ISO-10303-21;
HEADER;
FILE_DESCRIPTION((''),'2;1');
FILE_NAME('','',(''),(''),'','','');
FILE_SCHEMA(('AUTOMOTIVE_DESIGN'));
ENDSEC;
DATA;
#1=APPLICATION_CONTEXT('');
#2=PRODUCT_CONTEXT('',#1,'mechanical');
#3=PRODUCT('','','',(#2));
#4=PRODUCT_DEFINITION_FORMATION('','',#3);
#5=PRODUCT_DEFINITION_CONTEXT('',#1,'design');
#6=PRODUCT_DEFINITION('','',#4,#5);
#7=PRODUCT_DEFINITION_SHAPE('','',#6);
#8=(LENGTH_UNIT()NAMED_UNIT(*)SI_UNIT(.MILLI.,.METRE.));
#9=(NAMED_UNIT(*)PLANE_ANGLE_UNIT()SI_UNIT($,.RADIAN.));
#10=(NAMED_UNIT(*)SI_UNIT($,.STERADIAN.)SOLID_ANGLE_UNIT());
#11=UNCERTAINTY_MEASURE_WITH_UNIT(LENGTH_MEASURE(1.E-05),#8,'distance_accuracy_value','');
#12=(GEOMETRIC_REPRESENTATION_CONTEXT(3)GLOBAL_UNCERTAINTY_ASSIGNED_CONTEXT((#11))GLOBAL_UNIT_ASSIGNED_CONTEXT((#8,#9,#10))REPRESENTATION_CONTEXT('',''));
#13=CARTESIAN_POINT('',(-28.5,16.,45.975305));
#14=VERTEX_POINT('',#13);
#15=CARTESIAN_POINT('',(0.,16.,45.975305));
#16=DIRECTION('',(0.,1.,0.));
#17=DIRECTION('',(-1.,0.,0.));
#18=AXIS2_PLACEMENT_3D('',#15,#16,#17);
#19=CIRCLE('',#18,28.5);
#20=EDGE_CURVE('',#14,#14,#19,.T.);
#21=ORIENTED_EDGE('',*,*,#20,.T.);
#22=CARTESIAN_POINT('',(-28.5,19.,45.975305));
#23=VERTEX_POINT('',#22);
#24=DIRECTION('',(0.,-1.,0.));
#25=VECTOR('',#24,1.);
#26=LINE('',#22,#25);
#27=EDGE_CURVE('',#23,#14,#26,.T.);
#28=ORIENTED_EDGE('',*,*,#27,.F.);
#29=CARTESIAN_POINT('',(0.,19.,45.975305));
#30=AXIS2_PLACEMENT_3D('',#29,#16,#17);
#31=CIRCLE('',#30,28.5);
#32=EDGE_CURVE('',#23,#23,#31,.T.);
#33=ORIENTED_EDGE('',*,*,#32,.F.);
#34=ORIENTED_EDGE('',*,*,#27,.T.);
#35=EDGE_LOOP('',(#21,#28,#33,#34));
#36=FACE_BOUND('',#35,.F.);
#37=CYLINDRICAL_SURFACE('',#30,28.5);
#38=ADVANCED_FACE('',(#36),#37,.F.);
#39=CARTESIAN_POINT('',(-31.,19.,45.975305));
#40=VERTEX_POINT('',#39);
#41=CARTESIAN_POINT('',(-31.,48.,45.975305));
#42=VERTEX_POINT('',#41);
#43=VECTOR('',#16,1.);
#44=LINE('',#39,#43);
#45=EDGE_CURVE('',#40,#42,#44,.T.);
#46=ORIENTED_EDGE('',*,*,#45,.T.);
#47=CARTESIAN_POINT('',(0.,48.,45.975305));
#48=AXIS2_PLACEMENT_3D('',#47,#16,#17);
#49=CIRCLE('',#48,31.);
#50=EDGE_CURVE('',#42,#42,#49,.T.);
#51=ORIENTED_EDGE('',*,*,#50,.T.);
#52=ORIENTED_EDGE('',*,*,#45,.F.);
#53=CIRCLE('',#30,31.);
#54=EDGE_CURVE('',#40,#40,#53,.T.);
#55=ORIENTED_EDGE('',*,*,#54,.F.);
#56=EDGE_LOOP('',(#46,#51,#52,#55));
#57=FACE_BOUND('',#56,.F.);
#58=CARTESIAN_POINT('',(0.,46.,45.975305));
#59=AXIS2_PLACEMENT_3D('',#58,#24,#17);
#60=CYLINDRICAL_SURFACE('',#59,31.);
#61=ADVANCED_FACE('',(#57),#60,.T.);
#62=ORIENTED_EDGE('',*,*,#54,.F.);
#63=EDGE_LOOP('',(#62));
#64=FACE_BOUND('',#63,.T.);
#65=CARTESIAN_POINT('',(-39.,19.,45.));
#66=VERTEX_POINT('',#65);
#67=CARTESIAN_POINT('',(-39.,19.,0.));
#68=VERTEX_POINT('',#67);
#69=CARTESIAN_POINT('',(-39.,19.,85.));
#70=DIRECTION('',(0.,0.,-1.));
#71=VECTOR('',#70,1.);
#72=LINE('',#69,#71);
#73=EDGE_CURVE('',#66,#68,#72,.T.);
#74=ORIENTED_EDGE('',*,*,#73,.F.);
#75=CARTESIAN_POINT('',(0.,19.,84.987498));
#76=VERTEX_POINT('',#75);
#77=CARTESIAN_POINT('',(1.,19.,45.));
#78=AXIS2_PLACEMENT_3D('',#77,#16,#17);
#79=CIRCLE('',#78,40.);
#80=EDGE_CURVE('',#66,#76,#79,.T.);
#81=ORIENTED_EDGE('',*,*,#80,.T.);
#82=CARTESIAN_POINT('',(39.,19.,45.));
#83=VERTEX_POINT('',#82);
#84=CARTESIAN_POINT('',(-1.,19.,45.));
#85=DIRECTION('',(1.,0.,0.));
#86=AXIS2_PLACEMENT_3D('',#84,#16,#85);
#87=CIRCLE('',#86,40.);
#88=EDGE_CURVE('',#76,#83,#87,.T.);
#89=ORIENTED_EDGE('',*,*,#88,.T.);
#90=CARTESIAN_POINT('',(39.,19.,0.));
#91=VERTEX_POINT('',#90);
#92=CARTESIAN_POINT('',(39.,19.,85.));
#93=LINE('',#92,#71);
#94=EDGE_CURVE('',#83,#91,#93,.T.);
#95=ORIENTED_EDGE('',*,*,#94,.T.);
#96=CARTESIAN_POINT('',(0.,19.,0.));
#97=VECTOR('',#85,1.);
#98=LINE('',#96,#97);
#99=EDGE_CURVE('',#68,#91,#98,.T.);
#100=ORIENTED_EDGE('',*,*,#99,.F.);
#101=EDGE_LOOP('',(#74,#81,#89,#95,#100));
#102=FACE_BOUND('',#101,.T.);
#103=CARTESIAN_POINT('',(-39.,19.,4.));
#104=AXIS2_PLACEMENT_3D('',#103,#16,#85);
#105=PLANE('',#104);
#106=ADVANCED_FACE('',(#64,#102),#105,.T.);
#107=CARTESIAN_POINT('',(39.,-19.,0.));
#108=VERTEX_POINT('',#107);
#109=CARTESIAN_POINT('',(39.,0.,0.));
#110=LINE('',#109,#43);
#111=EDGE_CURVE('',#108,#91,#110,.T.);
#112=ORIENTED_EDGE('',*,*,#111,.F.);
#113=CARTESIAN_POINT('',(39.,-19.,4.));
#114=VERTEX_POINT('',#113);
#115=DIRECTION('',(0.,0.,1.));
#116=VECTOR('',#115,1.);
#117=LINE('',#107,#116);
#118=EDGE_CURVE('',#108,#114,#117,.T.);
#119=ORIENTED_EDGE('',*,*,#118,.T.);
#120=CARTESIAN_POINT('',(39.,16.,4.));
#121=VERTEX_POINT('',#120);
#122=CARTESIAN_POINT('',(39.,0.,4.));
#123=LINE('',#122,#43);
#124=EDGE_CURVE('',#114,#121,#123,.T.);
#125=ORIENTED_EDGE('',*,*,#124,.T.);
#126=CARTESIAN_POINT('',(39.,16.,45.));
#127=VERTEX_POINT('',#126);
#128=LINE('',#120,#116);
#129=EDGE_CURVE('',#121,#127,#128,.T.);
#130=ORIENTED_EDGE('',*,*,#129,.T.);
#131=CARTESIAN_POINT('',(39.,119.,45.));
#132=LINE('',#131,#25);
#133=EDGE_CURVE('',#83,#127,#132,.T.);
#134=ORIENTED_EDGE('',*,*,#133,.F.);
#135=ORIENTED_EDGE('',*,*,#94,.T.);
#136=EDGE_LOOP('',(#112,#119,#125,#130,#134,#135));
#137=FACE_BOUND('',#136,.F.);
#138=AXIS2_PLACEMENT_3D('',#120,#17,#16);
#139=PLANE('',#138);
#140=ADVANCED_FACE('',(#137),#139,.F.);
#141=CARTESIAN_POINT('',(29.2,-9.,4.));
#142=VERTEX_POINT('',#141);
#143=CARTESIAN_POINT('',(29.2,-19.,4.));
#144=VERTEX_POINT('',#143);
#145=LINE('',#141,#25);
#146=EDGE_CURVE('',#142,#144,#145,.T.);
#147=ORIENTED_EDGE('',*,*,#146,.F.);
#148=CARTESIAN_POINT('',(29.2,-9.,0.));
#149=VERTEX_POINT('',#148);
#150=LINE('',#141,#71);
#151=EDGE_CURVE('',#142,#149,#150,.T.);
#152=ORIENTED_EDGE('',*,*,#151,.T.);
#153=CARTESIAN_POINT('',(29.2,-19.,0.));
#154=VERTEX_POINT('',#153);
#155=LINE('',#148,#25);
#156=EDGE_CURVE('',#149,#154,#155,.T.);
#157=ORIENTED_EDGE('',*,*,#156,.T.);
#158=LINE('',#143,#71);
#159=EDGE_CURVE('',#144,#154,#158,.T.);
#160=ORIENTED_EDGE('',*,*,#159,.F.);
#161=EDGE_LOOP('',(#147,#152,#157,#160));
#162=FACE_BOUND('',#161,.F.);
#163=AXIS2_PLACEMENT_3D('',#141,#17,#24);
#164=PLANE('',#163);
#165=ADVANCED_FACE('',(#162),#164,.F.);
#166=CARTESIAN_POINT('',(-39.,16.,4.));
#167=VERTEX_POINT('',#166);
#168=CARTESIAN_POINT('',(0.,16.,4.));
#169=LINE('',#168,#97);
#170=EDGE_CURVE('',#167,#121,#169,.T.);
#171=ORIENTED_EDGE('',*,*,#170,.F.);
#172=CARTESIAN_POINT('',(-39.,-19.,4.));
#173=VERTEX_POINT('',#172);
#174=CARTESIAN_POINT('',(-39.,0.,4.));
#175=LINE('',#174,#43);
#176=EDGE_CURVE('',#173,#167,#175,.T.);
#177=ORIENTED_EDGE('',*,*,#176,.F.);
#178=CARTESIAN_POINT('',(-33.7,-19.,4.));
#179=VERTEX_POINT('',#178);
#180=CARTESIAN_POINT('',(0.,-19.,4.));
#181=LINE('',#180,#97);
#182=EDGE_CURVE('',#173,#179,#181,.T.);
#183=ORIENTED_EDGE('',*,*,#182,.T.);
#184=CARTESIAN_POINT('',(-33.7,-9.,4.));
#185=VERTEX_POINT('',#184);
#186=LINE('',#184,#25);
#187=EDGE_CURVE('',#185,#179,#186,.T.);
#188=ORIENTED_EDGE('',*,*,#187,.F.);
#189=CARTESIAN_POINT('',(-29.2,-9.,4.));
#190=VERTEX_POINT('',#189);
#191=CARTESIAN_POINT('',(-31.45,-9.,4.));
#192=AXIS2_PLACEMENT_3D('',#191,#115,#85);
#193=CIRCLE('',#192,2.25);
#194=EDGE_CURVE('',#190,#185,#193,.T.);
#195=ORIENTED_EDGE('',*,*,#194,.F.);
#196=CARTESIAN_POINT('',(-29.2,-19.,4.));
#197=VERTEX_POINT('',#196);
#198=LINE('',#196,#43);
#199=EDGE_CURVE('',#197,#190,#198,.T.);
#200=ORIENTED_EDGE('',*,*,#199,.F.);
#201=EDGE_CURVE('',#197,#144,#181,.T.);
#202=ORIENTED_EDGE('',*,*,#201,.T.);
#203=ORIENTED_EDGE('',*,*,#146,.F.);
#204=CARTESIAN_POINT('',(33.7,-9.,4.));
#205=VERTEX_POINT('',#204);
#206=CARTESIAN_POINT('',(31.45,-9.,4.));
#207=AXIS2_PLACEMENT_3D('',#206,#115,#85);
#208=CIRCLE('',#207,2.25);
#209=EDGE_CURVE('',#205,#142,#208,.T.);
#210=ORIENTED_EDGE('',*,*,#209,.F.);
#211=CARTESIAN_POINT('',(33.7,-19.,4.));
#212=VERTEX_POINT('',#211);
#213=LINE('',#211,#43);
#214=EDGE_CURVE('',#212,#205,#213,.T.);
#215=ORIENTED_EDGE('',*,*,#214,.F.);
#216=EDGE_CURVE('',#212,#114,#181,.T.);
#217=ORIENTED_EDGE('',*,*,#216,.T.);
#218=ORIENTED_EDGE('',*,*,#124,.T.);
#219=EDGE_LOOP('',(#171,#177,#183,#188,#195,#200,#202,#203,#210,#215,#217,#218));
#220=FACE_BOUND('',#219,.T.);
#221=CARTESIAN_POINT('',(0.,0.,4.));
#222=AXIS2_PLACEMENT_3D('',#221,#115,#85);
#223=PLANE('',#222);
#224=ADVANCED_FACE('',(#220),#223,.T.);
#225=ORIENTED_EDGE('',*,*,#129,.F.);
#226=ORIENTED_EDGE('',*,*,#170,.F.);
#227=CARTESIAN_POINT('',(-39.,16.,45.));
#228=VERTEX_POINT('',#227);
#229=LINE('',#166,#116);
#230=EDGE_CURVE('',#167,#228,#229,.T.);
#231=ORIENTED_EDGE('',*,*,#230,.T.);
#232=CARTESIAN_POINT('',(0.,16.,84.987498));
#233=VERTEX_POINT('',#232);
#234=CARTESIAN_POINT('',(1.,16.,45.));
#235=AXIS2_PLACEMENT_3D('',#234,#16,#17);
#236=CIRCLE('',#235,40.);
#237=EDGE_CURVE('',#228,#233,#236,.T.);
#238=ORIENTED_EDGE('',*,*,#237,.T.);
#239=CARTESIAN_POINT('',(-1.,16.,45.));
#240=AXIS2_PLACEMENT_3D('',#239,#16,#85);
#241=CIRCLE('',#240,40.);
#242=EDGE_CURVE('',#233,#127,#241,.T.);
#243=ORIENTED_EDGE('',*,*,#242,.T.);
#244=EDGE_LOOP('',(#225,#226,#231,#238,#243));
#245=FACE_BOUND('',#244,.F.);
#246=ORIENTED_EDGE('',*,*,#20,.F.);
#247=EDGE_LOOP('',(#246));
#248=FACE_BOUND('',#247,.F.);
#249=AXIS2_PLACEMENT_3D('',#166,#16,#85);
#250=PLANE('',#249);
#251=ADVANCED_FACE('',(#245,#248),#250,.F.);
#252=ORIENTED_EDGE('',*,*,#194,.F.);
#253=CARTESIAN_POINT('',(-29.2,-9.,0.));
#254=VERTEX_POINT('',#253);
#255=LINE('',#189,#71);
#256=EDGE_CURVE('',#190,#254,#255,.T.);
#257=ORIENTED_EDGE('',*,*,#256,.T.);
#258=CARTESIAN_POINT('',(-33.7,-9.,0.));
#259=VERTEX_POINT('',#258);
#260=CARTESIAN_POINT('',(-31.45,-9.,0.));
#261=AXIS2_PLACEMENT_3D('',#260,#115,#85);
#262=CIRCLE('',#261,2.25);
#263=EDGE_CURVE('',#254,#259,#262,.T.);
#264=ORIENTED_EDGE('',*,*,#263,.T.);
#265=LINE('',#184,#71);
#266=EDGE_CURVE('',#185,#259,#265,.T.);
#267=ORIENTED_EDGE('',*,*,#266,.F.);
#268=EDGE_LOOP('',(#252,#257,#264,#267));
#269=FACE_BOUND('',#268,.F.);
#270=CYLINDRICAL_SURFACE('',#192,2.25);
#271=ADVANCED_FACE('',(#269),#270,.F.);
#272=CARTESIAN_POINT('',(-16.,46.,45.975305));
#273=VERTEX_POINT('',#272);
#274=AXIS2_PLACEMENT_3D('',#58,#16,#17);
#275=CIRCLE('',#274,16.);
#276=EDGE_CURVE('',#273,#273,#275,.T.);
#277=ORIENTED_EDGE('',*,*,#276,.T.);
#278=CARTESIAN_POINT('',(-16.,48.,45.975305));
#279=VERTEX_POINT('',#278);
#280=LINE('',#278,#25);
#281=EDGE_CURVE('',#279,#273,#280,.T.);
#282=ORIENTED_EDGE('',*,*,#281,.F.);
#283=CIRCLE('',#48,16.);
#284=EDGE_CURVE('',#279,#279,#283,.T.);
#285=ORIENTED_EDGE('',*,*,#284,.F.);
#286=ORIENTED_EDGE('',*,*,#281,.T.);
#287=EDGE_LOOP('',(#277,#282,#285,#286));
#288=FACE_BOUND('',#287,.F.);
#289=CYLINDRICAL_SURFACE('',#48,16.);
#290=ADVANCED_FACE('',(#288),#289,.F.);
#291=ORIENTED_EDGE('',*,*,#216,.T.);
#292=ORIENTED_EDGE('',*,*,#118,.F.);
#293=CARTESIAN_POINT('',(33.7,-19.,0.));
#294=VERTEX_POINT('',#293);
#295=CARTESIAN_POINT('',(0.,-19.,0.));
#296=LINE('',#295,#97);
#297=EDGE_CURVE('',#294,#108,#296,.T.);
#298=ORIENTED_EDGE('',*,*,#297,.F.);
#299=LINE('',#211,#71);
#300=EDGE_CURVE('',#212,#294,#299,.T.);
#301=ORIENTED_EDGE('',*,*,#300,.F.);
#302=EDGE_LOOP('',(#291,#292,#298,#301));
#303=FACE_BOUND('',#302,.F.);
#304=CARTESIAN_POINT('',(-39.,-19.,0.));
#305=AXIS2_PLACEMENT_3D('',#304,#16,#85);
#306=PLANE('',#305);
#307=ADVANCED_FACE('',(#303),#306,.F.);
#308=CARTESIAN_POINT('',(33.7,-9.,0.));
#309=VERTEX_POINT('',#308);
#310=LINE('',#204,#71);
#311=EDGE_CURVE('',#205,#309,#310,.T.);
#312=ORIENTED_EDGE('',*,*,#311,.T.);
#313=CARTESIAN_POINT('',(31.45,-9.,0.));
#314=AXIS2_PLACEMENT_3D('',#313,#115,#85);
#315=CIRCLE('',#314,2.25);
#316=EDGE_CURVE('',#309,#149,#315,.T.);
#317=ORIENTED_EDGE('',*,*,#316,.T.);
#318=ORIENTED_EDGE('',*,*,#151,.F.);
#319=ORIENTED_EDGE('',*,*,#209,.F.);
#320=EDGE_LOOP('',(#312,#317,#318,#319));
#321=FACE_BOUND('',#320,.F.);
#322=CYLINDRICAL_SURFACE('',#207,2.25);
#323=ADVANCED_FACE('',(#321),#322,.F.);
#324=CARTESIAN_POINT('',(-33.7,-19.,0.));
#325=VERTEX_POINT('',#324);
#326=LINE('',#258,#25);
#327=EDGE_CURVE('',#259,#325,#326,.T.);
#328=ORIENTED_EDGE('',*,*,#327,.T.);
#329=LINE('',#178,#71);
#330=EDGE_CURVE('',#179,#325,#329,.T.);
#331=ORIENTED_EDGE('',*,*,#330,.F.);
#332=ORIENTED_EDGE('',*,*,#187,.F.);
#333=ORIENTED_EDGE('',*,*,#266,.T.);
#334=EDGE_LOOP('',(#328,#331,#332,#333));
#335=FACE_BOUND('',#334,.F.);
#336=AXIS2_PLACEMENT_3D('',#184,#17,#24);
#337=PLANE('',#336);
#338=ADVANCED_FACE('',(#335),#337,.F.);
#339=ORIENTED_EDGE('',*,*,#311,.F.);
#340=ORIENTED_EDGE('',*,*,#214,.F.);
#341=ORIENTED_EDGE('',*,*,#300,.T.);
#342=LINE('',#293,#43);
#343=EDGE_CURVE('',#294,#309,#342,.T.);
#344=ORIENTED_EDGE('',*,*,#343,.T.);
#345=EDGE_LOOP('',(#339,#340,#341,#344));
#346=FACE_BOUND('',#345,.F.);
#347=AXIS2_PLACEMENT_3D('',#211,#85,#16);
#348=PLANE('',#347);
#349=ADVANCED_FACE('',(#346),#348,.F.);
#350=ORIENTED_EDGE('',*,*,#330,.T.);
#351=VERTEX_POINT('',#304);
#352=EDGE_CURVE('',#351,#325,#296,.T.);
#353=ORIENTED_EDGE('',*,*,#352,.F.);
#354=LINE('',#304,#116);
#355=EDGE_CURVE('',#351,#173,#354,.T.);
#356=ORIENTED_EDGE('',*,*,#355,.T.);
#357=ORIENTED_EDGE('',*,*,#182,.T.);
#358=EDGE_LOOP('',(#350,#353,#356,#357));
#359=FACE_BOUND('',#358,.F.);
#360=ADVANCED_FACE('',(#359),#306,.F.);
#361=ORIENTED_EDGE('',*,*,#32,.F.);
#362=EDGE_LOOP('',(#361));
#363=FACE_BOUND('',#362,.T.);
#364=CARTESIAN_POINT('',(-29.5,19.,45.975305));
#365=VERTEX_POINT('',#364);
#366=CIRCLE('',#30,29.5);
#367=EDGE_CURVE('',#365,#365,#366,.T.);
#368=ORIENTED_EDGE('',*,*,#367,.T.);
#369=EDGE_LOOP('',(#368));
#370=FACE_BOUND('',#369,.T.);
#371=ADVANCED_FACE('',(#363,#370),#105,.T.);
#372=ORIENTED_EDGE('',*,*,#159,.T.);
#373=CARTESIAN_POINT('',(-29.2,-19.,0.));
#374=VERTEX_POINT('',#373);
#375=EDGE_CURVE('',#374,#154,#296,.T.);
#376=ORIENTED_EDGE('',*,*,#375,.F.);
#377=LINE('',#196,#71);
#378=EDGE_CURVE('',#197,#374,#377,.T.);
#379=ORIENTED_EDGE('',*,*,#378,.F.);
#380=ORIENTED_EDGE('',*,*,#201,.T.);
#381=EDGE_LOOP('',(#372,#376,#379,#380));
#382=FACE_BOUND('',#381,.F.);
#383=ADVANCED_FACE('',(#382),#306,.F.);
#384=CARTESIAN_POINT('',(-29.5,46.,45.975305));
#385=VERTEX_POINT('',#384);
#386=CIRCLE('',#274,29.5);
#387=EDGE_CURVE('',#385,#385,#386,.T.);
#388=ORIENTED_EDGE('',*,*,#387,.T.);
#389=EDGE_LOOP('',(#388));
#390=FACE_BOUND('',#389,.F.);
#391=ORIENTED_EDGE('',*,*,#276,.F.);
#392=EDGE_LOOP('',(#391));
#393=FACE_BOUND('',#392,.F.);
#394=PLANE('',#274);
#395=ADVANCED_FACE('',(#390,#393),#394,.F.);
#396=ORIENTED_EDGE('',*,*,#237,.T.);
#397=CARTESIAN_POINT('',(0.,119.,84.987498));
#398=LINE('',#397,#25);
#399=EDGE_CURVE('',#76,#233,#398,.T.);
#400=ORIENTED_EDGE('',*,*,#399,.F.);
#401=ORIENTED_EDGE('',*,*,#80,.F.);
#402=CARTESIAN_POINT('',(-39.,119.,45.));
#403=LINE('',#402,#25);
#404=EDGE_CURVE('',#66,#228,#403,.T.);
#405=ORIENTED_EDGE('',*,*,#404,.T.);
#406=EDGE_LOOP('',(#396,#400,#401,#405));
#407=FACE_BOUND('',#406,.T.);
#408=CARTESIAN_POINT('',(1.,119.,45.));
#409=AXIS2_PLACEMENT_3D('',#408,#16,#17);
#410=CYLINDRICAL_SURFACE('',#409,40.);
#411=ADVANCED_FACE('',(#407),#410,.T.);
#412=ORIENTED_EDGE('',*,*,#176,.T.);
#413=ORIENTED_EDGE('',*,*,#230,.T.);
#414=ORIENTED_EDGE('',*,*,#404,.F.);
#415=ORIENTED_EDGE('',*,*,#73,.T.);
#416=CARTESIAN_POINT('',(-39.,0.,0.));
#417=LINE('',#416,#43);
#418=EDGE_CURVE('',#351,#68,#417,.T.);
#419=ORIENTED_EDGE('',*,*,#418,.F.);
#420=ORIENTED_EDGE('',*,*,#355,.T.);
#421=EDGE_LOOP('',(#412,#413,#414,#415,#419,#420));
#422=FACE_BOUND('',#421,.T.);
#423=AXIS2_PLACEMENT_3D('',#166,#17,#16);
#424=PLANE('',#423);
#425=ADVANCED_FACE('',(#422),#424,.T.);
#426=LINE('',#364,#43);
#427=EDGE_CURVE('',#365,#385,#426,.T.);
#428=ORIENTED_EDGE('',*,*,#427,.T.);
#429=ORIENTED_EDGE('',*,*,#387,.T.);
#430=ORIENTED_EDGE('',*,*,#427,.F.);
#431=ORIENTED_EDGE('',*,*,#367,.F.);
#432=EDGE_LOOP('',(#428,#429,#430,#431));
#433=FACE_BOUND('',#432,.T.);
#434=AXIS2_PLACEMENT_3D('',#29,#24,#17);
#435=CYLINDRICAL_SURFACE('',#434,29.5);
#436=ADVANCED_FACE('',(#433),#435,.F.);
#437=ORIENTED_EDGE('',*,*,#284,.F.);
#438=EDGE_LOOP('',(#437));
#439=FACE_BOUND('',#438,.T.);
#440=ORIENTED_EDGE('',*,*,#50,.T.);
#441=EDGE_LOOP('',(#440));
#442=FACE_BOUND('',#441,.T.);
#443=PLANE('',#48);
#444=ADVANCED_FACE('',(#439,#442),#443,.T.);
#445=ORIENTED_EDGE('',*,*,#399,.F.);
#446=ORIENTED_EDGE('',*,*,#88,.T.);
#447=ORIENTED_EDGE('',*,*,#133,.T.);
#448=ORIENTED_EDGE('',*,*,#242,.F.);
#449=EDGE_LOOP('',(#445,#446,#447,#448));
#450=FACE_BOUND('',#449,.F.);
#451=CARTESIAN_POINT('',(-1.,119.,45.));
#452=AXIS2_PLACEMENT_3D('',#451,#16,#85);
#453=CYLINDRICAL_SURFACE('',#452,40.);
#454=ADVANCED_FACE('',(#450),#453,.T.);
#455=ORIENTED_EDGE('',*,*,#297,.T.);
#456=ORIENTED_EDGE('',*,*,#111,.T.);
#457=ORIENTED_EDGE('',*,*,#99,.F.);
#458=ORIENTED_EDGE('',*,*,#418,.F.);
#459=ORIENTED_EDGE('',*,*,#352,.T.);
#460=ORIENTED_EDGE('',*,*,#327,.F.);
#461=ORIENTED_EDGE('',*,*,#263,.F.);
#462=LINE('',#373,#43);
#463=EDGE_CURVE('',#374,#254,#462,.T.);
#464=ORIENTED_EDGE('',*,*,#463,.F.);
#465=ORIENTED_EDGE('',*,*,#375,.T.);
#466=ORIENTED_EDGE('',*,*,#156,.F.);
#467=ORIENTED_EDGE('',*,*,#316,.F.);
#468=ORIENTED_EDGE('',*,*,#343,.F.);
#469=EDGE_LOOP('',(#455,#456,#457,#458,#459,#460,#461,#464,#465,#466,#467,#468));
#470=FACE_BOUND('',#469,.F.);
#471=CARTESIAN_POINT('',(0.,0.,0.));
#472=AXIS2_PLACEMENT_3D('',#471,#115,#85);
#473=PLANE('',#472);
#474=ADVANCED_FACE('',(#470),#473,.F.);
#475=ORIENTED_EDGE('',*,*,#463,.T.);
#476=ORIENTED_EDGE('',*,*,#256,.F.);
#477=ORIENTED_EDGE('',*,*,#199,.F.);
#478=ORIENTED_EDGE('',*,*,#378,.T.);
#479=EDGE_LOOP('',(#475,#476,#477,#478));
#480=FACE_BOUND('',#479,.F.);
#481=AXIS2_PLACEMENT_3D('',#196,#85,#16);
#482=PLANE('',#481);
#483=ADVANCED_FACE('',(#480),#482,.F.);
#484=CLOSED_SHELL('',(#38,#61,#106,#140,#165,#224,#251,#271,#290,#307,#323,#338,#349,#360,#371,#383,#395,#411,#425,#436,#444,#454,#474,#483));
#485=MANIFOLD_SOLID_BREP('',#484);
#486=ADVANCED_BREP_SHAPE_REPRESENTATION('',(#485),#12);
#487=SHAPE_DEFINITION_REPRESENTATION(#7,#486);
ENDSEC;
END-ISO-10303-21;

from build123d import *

# Parameters (mm, degrees)
F0_W        = 78
F0_H        = 38
F1_DEPTH    = 4
F2_W        = 78
F2_H        = 3
F3_DEPTH    = 81
F4_T1_DEPTH = 203
F5_R        = 31
F5_R_2      = 29.5
F6_DEPTH    = 27
F7_R        = 28.5
F8_DEPTH    = 3
F9_R        = 31
F10_DEPTH   = 2
F11_R       = 16
F12_DEPTH   = 2
F14_DEPTH   = 4


# Not quite as in the source:
# - a fillet or chamfer that OpenCascade refuses, or shapes differently, is made with other operations: its cross-section is extruded or revolved along the edge and cut away or added


with BuildPart() as f1:
    # F0 (on Top) → F1 (new body)
    with BuildSketch(Plane.XY):
        Rectangle(F0_W, F0_H)
    extrude(amount=F1_DEPTH)

    # F2 (on face) → F3 (join)
    with BuildSketch(Plane.XY.offset(4)):
        with Locations((0, 17.5)):
            Rectangle(F2_W, F2_H)
    extrude(amount=F3_DEPTH)

    # F4: fillet of radius 40 on 2 edges, made by hand

    # F4_s2 → F4_t1 (cut)
    with BuildSketch(Plane.XZ.offset(-119)):
        with BuildLine():
            ThreePointArc((39, 45), (27.2842712475, 73.2842712475), (-1, 85))
            Line((-1, 85), (39, 85))
            Line((39, 85), (39, 45))
        make_face()
        with BuildLine():
            ThreePointArc((-39, 45), (-27.2842712475, 73.2842712475), (1, 85))
            Line((1, 85), (-39, 85))
            Line((-39, 85), (-39, 45))
        make_face()
    extrude(amount=F4_T1_DEPTH, mode=Mode.SUBTRACT)

    # F5 (on face) → F6 (join)
    with BuildSketch(Plane(origin=(0, 19, 0), x_dir=(-1, 0, 0), z_dir=(0, 1, 0))):
        with Locations((0, 45.9753048304)):
            Circle(F5_R)
        with Locations((0, 45.9753048304)):
            Circle(F5_R_2, mode=Mode.SUBTRACT)
    extrude(amount=F6_DEPTH)

    # F7 (on face) → F8 (cut, through all)
    with BuildSketch(Plane(origin=(0, 19, 0), x_dir=(-1, 0, 0), z_dir=(0, 1, 0))):
        with Locations((0, 45.9753048304)):
            Circle(F7_R)
    extrude(amount=-F8_DEPTH, mode=Mode.SUBTRACT)

    # F9 (on face) → F10 (join)
    with BuildSketch(Plane(origin=(0, 46, 0), x_dir=(-1, 0, 0), z_dir=(0, 1, 0))):
        with Locations((0, 45.9753048304)):
            Circle(F9_R)
    extrude(amount=F10_DEPTH)

    # F11 (on face) → F12 (cut, through all)
    with BuildSketch(Plane(origin=(0, 48, 0), x_dir=(-1, 0, 0), z_dir=(0, 1, 0))):
        with Locations((0, 45.9753048304)):
            Circle(F11_R)
    extrude(amount=-F12_DEPTH, mode=Mode.SUBTRACT)

    # F13 (on face) → F14 (cut, through all)
    with BuildSketch(Plane.XY.offset(4)):
        with BuildLine():
            Line((29.2, -19), (33.7, -19))
            Line((33.7, -19), (33.7, -9))
            ThreePointArc((33.7, -9), (31.45, -11.25), (29.2, -9))
            Line((29.2, -9), (29.2, -19))
        make_face()
        with BuildLine():
            ThreePointArc((29.2, -9), (31.45, -11.25), (33.7, -9))
            Line((33.7, -9), (29.2, -9))
        make_face()
        with BuildLine():
            Line((29.2, -9), (33.7, -9))
            ThreePointArc((33.7, -9), (31.45, -6.75), (29.2, -9))
        make_face()
        with BuildLine():
            ThreePointArc((-29.2, -9), (-31.45, -6.75), (-33.7, -9))
            Line((-33.7, -9), (-29.2, -9))
        make_face()
        with BuildLine():
            ThreePointArc((-29.2, -9), (-31.45, -11.25), (-33.7, -9))
            Line((-33.7, -9), (-33.7, -19))
            Line((-33.7, -19), (-29.2, -19))
            Line((-29.2, -19), (-29.2, -9))
        make_face()
        with BuildLine():
            Line((-29.2, -9), (-33.7, -9))
            ThreePointArc((-33.7, -9), (-31.45, -11.25), (-29.2, -9))
        make_face()
    extrude(amount=-F14_DEPTH, mode=Mode.SUBTRACT)


solid = f1.part
